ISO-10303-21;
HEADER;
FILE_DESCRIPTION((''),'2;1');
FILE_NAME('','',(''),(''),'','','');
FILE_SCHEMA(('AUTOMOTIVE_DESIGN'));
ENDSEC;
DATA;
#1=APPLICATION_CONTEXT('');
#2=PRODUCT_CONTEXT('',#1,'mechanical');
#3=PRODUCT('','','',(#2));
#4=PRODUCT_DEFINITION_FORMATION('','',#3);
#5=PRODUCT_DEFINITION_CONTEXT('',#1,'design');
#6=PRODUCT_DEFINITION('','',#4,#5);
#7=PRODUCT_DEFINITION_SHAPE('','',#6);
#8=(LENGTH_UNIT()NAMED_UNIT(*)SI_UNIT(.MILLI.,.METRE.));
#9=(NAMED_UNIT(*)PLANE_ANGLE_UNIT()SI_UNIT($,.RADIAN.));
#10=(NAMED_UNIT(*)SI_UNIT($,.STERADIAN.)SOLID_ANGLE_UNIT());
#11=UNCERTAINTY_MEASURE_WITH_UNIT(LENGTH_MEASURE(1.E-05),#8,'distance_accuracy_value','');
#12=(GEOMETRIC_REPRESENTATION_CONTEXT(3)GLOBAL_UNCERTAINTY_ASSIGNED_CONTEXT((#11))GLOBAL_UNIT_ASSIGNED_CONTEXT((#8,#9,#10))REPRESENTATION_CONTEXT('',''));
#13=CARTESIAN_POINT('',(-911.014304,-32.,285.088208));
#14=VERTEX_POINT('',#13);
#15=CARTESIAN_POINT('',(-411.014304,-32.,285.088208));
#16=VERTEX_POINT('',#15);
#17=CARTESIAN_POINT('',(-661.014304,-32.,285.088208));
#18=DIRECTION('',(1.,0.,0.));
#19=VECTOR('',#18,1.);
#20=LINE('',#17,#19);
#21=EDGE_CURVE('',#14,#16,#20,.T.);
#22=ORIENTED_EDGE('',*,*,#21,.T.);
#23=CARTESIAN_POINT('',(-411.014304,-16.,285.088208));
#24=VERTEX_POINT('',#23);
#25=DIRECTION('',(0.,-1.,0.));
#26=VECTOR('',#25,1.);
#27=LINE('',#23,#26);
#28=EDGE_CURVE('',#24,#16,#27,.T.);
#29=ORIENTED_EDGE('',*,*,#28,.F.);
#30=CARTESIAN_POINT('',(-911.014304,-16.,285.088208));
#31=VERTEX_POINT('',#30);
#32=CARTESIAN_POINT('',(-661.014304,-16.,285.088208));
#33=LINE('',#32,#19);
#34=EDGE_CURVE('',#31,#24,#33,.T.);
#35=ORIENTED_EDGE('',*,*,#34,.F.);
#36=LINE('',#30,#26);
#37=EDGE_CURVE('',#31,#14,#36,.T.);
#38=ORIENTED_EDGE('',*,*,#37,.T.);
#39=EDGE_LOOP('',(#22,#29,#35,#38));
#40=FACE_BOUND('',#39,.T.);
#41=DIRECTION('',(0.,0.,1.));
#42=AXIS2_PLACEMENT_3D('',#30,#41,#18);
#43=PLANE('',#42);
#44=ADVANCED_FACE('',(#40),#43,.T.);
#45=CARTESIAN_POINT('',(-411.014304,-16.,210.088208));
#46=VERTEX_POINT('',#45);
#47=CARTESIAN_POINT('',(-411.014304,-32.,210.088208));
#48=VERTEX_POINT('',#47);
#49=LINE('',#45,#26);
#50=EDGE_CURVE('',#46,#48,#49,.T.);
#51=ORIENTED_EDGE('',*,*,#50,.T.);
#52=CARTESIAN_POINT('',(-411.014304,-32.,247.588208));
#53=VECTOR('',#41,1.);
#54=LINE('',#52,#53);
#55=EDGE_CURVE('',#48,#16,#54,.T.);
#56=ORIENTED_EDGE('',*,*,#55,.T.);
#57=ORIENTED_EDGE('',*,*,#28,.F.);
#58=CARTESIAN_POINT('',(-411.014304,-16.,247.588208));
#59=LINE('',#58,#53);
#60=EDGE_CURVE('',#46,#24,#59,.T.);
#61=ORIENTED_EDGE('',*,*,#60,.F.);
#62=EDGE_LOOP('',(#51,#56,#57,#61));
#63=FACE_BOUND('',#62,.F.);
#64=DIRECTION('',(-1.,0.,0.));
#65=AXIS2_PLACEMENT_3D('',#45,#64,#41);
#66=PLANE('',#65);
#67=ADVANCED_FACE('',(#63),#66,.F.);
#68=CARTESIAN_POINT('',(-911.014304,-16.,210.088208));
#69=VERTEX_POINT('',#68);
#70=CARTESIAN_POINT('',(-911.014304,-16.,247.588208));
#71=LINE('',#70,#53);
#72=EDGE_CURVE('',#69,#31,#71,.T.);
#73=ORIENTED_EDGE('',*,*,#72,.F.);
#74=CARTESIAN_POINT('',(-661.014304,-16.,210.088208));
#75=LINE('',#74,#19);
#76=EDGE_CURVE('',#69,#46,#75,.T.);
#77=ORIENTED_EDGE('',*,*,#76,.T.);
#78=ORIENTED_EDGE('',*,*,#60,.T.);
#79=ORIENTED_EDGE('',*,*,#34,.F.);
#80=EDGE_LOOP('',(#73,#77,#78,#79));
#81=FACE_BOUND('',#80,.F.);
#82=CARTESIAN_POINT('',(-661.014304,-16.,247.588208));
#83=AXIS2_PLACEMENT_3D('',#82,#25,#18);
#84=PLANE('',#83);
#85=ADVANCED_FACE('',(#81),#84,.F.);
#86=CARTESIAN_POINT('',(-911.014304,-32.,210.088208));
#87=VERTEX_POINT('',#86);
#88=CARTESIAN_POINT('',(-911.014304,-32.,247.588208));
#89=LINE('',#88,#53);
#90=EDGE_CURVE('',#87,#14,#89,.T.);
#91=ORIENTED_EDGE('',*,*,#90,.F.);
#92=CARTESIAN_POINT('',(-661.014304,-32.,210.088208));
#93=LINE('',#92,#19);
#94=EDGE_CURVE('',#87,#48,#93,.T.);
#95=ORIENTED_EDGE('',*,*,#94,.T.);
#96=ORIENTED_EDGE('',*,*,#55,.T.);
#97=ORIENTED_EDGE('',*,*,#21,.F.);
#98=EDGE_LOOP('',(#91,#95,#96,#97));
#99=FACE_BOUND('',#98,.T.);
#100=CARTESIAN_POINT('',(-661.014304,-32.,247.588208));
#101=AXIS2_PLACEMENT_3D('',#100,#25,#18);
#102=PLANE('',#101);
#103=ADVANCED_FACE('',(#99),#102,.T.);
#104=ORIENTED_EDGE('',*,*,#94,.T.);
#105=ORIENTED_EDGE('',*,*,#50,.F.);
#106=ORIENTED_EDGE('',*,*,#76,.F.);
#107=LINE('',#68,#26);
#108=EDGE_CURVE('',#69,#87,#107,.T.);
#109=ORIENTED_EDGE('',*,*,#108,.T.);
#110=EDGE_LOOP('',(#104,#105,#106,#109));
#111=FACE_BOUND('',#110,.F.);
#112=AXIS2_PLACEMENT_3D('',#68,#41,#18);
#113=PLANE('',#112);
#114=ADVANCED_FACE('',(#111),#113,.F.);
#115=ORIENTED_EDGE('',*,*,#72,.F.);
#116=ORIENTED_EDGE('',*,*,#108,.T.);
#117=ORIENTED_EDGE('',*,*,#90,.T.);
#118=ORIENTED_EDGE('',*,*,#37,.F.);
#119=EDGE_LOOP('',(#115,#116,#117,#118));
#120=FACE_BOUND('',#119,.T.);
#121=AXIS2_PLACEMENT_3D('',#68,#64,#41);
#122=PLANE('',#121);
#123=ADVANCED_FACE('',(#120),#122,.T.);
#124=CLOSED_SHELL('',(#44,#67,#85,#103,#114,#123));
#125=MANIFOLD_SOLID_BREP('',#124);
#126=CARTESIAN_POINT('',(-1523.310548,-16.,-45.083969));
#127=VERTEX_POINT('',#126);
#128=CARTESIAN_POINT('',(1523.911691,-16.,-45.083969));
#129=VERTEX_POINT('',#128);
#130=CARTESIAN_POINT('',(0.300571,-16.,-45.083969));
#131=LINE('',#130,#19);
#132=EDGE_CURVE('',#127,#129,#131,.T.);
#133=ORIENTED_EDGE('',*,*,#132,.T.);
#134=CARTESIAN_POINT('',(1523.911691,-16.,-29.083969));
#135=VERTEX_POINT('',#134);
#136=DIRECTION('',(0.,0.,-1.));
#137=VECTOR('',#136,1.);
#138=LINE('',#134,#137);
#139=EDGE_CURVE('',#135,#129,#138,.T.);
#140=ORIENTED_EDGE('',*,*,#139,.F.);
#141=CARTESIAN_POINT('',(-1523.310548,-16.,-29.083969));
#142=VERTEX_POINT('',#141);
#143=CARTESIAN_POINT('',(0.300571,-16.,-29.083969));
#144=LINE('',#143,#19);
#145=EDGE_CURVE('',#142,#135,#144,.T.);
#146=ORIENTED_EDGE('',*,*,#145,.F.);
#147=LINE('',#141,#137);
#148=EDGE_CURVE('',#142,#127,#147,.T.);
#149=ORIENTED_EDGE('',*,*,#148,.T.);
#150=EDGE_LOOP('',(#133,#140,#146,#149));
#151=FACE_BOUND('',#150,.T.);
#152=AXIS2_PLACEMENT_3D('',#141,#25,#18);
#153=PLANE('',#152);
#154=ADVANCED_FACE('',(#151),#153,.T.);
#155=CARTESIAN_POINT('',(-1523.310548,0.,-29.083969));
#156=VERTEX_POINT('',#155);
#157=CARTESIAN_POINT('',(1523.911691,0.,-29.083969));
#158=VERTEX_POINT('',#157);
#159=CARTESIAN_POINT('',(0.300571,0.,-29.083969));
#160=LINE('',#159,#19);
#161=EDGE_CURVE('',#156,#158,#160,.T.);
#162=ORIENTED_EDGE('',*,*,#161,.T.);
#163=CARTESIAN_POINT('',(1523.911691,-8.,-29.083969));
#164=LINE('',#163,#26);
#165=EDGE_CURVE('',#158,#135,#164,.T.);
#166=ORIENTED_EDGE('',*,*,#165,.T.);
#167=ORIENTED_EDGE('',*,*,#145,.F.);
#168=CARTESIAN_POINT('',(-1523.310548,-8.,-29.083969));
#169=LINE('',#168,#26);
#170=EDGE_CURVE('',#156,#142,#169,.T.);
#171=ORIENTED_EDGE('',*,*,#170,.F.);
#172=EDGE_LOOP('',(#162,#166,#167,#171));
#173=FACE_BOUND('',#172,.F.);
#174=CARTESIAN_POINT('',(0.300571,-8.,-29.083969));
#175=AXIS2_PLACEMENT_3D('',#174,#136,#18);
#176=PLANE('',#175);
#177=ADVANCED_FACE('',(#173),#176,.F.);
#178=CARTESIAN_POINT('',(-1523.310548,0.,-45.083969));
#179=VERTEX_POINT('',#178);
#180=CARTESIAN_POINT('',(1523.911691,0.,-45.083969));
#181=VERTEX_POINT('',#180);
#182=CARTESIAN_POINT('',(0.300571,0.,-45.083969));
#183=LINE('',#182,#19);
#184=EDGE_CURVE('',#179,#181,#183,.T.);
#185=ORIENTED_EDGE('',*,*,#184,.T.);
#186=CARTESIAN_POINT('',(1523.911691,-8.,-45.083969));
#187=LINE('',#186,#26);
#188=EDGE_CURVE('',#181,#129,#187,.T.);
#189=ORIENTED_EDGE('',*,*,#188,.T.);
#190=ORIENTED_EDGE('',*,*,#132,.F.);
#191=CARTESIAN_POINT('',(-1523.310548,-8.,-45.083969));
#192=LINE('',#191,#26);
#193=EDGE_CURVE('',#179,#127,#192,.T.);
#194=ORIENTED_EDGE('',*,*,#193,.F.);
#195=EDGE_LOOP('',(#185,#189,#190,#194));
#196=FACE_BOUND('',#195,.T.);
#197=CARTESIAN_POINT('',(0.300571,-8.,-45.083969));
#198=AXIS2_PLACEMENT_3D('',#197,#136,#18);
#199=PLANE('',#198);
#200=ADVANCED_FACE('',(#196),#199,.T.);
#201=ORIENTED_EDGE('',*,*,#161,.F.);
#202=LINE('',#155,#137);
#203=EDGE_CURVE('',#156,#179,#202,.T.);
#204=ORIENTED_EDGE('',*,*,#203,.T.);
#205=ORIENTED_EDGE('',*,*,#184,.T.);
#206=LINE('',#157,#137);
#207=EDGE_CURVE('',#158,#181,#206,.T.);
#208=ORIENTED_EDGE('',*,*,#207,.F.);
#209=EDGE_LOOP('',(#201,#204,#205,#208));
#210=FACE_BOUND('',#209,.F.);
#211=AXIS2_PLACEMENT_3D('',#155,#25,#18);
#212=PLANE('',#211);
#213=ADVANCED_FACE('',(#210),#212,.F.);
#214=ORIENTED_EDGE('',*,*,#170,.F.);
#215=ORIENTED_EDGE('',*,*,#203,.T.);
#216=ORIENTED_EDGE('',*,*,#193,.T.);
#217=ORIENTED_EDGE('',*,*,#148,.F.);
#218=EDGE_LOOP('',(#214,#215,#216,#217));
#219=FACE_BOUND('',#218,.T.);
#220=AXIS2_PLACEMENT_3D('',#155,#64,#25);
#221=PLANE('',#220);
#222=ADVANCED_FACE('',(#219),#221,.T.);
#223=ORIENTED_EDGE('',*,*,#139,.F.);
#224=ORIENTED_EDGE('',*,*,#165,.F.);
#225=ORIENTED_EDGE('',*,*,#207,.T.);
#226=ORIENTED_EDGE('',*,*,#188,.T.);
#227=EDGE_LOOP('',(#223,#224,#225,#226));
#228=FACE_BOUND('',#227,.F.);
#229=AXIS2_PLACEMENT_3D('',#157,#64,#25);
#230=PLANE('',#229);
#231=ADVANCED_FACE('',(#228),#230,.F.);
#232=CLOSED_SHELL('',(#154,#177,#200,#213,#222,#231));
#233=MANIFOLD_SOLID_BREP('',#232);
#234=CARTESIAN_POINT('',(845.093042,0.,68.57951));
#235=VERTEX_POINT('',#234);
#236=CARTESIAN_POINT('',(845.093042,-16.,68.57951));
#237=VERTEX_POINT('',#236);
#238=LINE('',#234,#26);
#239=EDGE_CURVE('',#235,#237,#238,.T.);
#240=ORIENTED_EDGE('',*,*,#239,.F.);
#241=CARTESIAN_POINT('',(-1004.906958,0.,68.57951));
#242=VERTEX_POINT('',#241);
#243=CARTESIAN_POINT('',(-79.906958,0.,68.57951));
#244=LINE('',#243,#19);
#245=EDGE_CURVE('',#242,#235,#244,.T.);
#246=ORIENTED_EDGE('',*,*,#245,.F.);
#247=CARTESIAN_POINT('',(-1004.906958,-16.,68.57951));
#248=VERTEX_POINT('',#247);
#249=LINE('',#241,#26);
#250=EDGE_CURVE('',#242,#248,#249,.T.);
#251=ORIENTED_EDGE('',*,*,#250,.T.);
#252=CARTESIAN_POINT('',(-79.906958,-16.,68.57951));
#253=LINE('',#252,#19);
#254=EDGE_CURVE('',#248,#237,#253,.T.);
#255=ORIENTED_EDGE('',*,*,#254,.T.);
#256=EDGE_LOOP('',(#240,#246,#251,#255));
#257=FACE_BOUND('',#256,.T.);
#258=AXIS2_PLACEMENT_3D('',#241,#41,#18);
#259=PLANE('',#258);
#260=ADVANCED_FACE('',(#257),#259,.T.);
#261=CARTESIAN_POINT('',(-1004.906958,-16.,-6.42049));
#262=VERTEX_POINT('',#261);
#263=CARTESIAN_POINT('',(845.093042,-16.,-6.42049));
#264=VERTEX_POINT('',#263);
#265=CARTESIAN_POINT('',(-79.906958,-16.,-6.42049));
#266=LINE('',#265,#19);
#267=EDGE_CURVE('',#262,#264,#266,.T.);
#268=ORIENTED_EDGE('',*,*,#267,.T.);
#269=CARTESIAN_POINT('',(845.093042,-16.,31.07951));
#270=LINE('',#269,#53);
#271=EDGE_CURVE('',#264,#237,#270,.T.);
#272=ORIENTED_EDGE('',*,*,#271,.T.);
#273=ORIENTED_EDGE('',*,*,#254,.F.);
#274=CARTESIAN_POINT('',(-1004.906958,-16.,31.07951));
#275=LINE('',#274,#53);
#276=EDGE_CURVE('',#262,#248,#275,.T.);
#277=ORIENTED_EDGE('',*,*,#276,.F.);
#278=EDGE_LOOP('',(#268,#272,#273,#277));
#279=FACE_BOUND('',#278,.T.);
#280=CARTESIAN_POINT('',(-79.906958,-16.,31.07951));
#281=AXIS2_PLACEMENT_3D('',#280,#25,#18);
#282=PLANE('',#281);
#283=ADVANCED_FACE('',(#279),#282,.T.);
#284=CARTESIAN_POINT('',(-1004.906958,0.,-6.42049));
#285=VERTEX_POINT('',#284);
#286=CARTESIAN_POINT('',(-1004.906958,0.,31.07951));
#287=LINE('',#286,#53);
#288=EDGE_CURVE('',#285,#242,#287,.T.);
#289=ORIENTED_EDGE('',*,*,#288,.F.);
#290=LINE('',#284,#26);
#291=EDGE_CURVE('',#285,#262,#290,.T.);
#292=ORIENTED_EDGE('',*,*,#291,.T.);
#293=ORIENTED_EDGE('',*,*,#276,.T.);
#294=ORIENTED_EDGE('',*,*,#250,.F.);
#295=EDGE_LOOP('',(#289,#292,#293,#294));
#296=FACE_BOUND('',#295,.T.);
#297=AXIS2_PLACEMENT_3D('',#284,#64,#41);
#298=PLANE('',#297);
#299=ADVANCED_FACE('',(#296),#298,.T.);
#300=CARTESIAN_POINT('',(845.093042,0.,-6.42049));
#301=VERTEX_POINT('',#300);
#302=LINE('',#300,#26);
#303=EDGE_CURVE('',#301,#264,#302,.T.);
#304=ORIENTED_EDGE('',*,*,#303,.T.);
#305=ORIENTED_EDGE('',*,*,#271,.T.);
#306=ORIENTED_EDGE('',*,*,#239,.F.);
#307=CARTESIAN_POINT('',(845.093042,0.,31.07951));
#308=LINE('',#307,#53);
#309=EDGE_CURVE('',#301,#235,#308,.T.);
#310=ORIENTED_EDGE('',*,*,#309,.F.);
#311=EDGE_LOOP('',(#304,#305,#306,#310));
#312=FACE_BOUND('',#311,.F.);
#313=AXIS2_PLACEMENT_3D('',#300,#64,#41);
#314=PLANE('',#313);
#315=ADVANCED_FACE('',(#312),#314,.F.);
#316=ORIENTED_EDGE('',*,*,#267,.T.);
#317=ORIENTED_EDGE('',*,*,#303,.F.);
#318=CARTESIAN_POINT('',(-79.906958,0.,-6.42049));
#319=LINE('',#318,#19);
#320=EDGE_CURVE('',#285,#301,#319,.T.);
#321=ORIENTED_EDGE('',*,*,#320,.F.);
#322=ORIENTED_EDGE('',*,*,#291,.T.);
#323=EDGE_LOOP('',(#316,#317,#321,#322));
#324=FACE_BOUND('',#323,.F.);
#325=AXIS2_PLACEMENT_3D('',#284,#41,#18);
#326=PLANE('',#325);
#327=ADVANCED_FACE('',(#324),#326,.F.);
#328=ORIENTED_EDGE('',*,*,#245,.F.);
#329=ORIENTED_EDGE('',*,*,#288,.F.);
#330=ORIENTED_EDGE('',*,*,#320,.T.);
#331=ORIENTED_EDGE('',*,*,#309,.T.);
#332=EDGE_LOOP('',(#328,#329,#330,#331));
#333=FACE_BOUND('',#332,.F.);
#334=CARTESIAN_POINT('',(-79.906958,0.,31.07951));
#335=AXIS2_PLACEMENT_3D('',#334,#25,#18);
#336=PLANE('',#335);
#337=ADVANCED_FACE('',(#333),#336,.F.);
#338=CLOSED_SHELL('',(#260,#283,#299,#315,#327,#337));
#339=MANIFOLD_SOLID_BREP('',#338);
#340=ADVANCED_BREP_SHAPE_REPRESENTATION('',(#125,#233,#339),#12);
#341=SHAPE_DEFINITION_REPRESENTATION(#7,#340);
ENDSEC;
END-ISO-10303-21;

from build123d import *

# Parameters (mm, degrees)
F1_E0_TOP_W = 3047.2222391173
F1_E0_TOP_H = 16
F3_DEPTH    = 16
F6_W        = 1850
F6_H        = 75
F7_DEPTH    = 16
F8_W        = 500
F8_H        = 75
F9_DEPTH    = 16


# Not quite as in the source:
# - the program builds the solid bodies; features that only make, move or delete a surface that nothing else refers to are left out


with BuildPart() as f3:
    # F1_E0_top (on explicit) → F3 (new body)
    with BuildSketch(Plane(origin=(-1523.3105482362, 0, -29.0839689784), x_dir=(1, 0, 0), z_dir=(0, 0, -1))):
        with Locations((1523.6111195587, 8)):
            Rectangle(F1_E0_TOP_W, F1_E0_TOP_H)
    extrude(amount=F3_DEPTH)


with BuildPart() as f7:
    # F6 (on Front) → F7 (new body)
    with BuildSketch(Plane.XZ):
        with Locations((-79.9069583416, 31.0795101923)):
            Rectangle(F6_W, F6_H)
    extrude(amount=F7_DEPTH)


with BuildPart() as f9:
    # F8 (on face) → F9 (new body)
    with BuildSketch(Plane.XZ.offset(16)):
        with Locations((-661.014303565, 247.5882079988)):
            Rectangle(F8_W, F8_H)
    extrude(amount=F9_DEPTH)


solid = Compound([f3.part, f7.part, f9.part])
